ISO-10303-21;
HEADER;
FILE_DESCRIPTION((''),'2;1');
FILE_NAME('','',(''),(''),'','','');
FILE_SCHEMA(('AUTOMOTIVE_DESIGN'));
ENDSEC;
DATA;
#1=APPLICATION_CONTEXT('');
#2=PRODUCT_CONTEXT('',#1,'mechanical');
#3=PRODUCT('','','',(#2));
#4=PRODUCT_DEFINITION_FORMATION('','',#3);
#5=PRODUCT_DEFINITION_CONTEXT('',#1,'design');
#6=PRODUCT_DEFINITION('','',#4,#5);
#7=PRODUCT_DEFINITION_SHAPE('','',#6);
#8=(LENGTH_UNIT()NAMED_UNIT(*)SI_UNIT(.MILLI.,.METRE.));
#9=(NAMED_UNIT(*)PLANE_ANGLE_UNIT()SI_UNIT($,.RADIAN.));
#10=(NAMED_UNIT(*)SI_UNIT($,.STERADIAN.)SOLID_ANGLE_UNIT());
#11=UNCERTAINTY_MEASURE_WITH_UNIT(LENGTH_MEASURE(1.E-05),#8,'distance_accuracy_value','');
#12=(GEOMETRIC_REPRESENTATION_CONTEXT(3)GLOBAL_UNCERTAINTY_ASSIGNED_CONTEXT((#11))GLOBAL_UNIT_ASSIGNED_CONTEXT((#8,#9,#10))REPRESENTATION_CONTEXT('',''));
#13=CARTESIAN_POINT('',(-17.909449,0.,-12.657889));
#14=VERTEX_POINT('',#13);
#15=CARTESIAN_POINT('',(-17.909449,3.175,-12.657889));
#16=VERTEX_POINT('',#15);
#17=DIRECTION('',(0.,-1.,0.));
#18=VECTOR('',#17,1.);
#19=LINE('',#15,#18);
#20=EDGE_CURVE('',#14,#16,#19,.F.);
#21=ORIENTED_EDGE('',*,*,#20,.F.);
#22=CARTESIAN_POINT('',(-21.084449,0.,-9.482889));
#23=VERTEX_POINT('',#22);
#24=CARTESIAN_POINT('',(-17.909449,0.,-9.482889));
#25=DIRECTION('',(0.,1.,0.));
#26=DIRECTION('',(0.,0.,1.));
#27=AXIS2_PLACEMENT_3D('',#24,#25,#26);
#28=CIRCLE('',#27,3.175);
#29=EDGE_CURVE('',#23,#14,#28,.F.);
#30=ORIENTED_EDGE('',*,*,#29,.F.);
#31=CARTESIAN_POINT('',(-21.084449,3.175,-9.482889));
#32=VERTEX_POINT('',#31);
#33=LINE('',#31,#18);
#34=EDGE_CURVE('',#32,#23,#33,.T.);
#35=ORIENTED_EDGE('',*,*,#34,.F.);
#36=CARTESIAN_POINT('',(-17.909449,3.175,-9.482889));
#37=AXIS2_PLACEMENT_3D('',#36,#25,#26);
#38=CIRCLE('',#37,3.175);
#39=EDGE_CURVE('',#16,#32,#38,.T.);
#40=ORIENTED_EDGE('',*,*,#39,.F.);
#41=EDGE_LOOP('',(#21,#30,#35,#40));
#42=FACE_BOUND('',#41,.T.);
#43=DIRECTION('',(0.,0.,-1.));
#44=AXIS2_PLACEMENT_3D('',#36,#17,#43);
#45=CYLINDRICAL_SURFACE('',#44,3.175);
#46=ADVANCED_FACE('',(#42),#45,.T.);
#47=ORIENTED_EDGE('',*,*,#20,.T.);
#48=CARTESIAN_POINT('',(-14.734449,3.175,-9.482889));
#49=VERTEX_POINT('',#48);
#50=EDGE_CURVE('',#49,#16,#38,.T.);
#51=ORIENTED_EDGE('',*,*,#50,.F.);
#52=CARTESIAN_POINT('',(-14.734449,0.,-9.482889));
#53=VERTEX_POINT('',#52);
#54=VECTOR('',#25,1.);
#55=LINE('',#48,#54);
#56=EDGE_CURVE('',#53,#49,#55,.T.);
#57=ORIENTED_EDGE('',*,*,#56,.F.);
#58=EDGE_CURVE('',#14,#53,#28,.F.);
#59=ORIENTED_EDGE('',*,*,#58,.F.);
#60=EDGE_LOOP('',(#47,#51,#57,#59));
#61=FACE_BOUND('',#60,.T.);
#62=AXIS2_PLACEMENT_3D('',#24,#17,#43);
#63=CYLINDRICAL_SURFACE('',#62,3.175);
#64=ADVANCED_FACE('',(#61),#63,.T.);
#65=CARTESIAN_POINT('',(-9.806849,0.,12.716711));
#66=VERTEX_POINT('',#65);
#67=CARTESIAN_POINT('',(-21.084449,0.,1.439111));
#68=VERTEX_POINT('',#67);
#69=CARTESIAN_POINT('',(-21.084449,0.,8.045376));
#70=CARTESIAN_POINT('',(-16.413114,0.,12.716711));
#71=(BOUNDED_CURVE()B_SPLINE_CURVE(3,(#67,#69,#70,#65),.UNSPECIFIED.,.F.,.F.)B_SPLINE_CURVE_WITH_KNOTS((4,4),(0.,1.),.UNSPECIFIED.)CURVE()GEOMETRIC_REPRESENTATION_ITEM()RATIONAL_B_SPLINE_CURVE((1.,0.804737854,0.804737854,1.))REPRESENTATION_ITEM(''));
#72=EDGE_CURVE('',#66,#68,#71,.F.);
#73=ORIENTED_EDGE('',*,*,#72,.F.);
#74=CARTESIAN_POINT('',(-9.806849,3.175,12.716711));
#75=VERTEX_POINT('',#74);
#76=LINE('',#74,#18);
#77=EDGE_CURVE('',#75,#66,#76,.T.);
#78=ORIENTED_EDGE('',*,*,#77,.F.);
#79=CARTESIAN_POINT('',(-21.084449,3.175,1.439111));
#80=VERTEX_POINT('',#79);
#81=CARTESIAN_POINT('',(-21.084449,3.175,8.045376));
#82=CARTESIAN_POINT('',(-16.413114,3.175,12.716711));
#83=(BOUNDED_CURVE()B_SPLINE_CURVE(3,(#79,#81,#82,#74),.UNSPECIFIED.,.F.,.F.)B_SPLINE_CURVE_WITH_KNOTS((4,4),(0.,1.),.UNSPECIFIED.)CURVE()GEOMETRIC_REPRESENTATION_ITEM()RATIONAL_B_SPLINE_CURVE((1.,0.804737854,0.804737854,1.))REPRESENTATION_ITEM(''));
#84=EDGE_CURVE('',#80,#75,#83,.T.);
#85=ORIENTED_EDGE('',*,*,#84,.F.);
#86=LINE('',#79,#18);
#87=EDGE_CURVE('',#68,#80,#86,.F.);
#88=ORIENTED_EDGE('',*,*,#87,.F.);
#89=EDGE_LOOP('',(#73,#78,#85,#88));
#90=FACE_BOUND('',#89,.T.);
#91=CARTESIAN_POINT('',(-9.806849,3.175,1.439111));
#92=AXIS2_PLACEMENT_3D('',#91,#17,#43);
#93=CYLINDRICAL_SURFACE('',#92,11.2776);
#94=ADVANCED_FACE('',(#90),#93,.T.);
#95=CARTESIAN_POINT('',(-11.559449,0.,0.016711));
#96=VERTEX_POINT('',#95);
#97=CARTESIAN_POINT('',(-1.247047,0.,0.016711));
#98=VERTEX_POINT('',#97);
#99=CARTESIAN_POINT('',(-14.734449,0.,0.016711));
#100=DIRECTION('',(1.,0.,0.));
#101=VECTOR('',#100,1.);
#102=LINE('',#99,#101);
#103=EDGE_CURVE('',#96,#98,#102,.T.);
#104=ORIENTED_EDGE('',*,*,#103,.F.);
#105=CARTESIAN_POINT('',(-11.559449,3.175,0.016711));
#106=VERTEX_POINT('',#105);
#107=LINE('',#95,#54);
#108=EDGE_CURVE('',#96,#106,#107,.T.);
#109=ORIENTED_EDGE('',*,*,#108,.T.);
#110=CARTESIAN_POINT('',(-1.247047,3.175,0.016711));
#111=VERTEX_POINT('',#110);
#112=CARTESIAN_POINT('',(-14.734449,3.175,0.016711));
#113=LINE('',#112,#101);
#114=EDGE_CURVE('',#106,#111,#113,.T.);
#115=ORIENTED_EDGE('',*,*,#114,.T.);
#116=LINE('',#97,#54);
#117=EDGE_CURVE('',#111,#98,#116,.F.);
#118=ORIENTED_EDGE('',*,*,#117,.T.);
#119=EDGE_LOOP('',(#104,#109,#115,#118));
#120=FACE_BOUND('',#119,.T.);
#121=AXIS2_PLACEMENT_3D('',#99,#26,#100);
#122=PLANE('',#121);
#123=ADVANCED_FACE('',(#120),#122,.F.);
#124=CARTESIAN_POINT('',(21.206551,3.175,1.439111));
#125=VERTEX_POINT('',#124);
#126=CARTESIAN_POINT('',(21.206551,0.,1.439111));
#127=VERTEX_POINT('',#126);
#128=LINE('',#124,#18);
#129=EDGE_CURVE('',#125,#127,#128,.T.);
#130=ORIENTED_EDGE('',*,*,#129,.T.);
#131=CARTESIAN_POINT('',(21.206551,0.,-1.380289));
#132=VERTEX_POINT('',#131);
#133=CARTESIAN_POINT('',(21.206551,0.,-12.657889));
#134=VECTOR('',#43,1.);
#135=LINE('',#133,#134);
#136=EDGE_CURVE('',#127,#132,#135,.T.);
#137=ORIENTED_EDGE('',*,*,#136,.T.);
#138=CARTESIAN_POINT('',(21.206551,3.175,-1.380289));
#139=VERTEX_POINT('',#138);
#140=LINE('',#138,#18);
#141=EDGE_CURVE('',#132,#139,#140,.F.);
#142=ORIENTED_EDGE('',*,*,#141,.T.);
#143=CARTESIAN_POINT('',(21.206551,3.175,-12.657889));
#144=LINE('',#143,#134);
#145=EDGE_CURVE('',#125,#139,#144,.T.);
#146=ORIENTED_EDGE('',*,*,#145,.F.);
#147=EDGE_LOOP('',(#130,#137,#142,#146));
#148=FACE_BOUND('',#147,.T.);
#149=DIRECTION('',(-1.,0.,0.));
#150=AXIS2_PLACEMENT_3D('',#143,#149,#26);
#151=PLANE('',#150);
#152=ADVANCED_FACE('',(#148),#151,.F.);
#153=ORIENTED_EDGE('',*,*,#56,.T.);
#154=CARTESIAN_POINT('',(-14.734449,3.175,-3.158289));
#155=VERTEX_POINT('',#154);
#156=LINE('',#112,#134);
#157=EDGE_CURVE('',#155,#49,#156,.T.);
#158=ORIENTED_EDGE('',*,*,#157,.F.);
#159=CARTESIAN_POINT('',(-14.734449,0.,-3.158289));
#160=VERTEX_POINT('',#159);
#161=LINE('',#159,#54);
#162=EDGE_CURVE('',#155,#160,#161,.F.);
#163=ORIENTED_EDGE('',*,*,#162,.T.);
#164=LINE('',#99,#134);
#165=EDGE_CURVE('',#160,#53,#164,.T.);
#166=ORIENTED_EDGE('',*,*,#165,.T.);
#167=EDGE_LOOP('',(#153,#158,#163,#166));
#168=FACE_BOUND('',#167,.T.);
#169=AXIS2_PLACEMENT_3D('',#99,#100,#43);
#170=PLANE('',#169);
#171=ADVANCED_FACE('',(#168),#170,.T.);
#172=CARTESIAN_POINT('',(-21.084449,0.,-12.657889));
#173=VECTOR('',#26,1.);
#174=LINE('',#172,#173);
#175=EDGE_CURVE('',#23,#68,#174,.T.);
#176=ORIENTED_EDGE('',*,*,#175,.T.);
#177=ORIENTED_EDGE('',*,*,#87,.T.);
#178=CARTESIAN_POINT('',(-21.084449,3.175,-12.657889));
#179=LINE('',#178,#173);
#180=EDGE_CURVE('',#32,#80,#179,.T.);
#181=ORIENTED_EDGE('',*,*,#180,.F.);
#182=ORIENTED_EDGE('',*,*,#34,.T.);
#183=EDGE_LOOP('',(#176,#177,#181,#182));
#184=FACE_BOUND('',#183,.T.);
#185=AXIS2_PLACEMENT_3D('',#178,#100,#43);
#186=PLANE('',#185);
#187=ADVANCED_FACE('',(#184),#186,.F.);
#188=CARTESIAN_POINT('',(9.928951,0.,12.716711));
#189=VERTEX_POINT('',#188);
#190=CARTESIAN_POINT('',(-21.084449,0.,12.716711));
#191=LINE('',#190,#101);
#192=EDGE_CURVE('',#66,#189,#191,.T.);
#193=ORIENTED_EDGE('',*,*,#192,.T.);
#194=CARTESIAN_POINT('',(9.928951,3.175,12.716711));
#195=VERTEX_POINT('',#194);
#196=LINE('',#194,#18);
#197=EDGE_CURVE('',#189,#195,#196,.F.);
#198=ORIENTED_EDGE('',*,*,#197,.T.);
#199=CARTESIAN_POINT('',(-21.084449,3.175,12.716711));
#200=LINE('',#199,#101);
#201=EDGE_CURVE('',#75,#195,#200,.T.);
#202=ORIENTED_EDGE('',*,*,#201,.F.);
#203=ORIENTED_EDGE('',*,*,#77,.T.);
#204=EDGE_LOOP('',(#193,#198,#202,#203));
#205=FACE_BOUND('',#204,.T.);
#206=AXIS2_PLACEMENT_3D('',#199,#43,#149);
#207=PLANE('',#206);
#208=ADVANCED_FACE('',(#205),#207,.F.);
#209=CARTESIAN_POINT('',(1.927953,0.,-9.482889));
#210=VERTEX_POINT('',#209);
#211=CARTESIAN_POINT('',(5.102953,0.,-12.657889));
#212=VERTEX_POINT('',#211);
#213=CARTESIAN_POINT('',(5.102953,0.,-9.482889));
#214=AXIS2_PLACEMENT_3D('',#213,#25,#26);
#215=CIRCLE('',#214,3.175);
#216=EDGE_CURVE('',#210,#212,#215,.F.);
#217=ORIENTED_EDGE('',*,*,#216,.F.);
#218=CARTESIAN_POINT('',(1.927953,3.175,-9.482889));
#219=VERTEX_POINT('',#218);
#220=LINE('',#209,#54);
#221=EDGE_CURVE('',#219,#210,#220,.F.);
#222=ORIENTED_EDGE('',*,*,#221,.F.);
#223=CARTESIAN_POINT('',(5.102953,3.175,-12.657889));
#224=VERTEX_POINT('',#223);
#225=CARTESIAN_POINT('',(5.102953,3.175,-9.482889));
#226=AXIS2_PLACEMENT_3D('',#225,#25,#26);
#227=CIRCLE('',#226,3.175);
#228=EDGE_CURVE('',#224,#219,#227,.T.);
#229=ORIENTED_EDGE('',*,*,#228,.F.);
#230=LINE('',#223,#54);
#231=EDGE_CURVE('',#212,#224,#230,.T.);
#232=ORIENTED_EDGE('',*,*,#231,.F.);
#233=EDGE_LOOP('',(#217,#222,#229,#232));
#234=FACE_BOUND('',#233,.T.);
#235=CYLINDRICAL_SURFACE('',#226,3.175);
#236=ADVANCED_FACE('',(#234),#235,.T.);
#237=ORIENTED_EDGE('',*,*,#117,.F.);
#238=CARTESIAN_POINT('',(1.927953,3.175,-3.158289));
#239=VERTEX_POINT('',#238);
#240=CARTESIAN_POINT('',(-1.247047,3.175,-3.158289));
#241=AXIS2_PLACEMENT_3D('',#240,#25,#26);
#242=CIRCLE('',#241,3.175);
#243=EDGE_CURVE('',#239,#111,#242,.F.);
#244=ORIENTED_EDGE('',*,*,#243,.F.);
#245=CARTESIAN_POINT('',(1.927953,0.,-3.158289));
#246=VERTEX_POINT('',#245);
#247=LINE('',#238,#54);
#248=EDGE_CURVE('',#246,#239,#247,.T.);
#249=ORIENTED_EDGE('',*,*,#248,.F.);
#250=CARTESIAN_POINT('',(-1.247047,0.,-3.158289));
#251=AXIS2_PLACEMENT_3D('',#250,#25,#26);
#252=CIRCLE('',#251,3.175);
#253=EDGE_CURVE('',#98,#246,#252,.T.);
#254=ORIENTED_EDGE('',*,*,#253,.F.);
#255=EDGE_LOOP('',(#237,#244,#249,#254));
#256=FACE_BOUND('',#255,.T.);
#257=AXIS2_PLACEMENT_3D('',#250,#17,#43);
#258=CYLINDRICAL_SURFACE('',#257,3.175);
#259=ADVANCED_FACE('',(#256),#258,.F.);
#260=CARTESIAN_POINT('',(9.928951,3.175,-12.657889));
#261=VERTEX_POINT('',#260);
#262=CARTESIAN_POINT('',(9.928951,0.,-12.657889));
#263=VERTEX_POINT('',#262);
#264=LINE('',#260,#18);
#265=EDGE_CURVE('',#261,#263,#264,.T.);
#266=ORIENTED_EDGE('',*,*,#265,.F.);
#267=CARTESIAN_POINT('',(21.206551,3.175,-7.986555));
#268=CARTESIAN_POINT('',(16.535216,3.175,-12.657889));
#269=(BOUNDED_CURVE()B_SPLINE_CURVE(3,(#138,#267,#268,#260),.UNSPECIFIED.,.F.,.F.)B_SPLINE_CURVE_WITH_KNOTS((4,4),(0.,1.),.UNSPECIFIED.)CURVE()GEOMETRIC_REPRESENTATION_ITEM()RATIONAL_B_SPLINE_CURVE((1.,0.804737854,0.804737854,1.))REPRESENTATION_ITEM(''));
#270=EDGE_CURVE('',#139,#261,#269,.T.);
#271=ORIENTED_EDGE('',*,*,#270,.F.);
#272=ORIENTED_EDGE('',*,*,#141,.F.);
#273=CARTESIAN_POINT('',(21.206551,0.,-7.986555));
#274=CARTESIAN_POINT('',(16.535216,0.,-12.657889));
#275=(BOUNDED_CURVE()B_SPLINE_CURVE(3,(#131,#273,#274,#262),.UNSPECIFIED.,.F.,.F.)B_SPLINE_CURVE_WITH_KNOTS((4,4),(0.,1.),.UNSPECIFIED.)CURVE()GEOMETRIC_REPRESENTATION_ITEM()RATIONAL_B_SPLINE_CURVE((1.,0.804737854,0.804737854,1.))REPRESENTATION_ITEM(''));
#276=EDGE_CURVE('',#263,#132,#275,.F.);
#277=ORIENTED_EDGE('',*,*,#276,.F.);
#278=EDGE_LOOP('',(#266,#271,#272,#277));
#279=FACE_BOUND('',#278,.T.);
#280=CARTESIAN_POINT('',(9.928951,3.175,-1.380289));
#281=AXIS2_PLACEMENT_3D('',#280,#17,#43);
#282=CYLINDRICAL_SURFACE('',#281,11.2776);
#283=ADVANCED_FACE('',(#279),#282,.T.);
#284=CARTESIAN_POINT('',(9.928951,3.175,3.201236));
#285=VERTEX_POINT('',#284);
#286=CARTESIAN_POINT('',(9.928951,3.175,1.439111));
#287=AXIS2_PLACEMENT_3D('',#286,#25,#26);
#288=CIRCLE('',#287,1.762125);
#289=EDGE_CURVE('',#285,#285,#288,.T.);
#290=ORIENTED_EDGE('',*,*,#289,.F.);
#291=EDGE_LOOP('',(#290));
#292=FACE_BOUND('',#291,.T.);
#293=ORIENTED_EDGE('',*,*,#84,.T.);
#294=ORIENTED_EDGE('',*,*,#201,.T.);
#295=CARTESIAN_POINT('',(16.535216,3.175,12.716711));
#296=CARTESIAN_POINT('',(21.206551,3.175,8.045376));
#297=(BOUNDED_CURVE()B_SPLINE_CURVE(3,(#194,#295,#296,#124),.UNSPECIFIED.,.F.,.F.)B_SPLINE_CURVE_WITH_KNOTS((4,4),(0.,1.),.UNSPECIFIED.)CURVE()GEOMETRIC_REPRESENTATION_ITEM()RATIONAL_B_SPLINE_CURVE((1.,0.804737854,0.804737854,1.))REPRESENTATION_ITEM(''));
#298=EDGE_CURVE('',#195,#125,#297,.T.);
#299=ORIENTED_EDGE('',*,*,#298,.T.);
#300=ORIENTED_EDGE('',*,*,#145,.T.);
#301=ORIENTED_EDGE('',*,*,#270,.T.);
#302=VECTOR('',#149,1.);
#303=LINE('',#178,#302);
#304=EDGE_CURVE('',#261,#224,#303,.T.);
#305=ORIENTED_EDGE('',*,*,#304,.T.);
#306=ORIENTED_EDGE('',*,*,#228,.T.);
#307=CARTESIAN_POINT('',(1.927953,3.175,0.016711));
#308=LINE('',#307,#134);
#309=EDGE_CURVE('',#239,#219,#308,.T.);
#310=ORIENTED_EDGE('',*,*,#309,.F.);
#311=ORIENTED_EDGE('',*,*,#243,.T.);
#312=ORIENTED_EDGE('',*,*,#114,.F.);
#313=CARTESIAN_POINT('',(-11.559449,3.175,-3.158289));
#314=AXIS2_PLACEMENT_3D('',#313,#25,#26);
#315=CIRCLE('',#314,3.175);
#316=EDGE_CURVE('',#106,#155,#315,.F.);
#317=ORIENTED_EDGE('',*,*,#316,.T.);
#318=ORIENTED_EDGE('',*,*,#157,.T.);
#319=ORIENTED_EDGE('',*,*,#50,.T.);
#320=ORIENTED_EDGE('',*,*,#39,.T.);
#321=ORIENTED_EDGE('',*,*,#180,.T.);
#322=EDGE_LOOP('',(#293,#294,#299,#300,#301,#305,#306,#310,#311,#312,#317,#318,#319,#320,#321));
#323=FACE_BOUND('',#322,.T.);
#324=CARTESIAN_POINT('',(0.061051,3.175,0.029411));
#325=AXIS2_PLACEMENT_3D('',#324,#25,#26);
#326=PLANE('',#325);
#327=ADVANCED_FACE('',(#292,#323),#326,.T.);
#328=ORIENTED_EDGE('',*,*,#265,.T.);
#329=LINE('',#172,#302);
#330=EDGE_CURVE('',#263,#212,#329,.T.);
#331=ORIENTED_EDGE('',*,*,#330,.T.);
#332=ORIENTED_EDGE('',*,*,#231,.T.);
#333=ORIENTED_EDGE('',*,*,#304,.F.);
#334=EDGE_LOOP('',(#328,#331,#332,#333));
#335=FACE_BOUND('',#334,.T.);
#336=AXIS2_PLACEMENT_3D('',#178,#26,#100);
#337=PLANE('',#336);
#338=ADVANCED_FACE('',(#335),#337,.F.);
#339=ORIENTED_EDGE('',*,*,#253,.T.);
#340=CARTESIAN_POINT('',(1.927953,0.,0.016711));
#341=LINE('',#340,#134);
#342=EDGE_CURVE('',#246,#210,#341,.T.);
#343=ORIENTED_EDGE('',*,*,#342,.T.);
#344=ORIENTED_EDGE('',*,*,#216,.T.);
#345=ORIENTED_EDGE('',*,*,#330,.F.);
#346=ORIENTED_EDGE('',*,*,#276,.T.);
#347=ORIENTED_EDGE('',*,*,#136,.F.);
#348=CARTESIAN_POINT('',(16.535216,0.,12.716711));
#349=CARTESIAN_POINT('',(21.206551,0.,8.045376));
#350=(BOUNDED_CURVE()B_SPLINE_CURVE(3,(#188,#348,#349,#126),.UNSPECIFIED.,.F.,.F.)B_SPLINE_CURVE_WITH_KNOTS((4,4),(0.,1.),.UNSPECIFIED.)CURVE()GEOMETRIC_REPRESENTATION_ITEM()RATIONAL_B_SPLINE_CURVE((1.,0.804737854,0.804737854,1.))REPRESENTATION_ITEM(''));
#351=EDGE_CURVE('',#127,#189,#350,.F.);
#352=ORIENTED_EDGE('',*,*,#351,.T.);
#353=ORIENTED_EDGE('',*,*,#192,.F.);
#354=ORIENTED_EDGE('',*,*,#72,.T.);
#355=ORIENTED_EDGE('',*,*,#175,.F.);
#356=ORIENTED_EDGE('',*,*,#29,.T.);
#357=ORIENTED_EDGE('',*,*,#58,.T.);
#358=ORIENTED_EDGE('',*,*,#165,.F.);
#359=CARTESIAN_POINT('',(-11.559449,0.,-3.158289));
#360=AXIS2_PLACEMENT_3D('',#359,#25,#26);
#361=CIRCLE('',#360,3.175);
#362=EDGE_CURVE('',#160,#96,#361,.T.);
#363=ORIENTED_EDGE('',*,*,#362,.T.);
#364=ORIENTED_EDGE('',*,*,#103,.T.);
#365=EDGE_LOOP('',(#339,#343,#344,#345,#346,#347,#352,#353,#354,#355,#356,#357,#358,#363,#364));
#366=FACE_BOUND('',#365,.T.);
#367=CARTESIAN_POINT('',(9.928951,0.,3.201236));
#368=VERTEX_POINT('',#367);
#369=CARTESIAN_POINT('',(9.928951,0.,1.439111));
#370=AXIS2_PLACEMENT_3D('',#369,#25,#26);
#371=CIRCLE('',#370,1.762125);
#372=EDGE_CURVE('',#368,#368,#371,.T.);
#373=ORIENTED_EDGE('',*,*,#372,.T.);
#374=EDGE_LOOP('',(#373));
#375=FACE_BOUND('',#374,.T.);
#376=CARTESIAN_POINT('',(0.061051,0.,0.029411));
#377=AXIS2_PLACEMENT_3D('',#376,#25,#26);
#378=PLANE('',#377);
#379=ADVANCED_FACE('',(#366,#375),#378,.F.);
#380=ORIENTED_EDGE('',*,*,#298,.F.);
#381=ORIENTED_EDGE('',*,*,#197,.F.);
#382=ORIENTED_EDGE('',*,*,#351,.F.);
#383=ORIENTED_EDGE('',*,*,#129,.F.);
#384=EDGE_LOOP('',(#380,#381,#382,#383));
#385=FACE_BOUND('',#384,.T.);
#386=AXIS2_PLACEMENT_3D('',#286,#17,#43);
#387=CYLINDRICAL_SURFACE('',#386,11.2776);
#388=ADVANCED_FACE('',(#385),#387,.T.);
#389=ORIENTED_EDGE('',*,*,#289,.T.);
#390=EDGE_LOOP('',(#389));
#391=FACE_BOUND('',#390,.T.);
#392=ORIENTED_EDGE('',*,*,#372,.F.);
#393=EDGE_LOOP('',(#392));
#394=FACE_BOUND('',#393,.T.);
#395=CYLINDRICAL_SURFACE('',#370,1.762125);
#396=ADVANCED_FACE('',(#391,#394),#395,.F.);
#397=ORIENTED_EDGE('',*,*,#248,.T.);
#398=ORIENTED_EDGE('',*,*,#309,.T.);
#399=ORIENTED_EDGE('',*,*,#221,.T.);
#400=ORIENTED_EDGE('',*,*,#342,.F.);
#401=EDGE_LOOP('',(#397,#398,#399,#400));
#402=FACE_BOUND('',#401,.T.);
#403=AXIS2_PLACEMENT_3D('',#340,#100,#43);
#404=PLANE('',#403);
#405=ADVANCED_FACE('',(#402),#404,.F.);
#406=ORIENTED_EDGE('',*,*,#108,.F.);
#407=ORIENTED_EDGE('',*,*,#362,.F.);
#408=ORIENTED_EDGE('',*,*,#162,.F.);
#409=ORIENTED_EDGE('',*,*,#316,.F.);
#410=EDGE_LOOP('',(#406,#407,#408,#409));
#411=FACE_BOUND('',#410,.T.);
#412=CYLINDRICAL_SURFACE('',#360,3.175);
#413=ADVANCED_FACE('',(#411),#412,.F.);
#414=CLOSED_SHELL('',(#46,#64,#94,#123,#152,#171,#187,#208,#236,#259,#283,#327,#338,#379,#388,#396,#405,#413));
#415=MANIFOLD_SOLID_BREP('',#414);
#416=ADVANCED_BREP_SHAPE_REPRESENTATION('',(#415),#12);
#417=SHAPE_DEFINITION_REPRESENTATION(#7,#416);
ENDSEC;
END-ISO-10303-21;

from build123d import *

# Parameters (mm, degrees)
SKETCH1_W           = 38.1
SKETCH1_H           = 22.86
BOSS_EXTRUDE1_DEPTH = 3.175
FILLET1_R           = 10.16
SKETCH3_R           = 1.5875
CUT_EXTRUDE1_DEPTH  = 23.44165825
FILLET3_R           = 10.16
SCALE1_SCALE_X      = 1.11
SCALE1_SCALE_Y      = 1
SCALE1_SCALE_Z      = 1.11
SKETCH4_W           = 16.66240239
SKETCH4_H           = 12.6746
CUT_EXTRUDE2_DEPTH  = 25.930165729
FILLET7_R           = 3.175


with BuildPart() as part:
    # Sketch1 → Boss-Extrude1 (new body)
    with BuildSketch(Plane(origin=(0, 0, 0), x_dir=(1, 0, 0), z_dir=(0, 1, 0))):
        Rectangle(SKETCH1_W, SKETCH1_H)
    extrude(amount=BOSS_EXTRUDE1_DEPTH)

    # Fillet1
    fillet1_edges = [part.edges().sort_by_distance(p)[0] for p in [
        (19.05, 1.5875, 11.43),
        (-19.05, 1.5875, 11.43),
    ]]
    fillet(fillet1_edges, radius=FILLET1_R)

    # Sketch3 → Cut-Extrude1 (cut, through all)
    with BuildSketch(Plane(origin=(0, 3.175, 0), x_dir=(1, 0, 0), z_dir=(0, 1, 0))):
        with Locations(Location((8.89, -1.27, 0), (0, 0, 270))):
            Circle(SKETCH3_R)
    extrude(amount=-CUT_EXTRUDE1_DEPTH, mode=Mode.SUBTRACT)

    # Fillet3
    fillet3_edges = [part.edges().sort_by_distance(p)[0] for p in [
        (19.05, 1.5875, -11.43),
    ]]
    fillet(fillet3_edges, radius=FILLET3_R)


with BuildPart() as part_1:
    # Scale1: scaled about (-0.555008507, 1.5875, -0.267369012)
    add(part.part.scale((SCALE1_SCALE_X, SCALE1_SCALE_Y, SCALE1_SCALE_Z), about=(-0.555008507, 1.5875, -0.267369012)))

    # Sketch4 → Cut-Extrude2 (cut, through all)
    with BuildSketch(Plane(origin=(0, 3.175, 0), x_dir=(1, 0, 0), z_dir=(0, 1, 0))):
        with Locations((-6.403247869, 6.320589409)):
            Rectangle(SKETCH4_W, SKETCH4_H)
    extrude(amount=-CUT_EXTRUDE2_DEPTH, mode=Mode.SUBTRACT)

    # Fillet7
    fillet7_edges = [part_1.edges().sort_by_distance(p)[0] for p in [
        (-14.734449064, 1.5875, 0.016710591),
        (-14.734449064, 1.5875, -12.657889409),
        (1.927953326, 1.5875, -12.657889409),
        (1.927953326, 1.5875, 0.016710591),
        (-21.084449064, 1.5875, -12.657889409),
    ]]
    fillet(fillet7_edges, radius=FILLET7_R - 0.0001)  # a hair under: the kernel refuses the full size


solid = part_1.part
